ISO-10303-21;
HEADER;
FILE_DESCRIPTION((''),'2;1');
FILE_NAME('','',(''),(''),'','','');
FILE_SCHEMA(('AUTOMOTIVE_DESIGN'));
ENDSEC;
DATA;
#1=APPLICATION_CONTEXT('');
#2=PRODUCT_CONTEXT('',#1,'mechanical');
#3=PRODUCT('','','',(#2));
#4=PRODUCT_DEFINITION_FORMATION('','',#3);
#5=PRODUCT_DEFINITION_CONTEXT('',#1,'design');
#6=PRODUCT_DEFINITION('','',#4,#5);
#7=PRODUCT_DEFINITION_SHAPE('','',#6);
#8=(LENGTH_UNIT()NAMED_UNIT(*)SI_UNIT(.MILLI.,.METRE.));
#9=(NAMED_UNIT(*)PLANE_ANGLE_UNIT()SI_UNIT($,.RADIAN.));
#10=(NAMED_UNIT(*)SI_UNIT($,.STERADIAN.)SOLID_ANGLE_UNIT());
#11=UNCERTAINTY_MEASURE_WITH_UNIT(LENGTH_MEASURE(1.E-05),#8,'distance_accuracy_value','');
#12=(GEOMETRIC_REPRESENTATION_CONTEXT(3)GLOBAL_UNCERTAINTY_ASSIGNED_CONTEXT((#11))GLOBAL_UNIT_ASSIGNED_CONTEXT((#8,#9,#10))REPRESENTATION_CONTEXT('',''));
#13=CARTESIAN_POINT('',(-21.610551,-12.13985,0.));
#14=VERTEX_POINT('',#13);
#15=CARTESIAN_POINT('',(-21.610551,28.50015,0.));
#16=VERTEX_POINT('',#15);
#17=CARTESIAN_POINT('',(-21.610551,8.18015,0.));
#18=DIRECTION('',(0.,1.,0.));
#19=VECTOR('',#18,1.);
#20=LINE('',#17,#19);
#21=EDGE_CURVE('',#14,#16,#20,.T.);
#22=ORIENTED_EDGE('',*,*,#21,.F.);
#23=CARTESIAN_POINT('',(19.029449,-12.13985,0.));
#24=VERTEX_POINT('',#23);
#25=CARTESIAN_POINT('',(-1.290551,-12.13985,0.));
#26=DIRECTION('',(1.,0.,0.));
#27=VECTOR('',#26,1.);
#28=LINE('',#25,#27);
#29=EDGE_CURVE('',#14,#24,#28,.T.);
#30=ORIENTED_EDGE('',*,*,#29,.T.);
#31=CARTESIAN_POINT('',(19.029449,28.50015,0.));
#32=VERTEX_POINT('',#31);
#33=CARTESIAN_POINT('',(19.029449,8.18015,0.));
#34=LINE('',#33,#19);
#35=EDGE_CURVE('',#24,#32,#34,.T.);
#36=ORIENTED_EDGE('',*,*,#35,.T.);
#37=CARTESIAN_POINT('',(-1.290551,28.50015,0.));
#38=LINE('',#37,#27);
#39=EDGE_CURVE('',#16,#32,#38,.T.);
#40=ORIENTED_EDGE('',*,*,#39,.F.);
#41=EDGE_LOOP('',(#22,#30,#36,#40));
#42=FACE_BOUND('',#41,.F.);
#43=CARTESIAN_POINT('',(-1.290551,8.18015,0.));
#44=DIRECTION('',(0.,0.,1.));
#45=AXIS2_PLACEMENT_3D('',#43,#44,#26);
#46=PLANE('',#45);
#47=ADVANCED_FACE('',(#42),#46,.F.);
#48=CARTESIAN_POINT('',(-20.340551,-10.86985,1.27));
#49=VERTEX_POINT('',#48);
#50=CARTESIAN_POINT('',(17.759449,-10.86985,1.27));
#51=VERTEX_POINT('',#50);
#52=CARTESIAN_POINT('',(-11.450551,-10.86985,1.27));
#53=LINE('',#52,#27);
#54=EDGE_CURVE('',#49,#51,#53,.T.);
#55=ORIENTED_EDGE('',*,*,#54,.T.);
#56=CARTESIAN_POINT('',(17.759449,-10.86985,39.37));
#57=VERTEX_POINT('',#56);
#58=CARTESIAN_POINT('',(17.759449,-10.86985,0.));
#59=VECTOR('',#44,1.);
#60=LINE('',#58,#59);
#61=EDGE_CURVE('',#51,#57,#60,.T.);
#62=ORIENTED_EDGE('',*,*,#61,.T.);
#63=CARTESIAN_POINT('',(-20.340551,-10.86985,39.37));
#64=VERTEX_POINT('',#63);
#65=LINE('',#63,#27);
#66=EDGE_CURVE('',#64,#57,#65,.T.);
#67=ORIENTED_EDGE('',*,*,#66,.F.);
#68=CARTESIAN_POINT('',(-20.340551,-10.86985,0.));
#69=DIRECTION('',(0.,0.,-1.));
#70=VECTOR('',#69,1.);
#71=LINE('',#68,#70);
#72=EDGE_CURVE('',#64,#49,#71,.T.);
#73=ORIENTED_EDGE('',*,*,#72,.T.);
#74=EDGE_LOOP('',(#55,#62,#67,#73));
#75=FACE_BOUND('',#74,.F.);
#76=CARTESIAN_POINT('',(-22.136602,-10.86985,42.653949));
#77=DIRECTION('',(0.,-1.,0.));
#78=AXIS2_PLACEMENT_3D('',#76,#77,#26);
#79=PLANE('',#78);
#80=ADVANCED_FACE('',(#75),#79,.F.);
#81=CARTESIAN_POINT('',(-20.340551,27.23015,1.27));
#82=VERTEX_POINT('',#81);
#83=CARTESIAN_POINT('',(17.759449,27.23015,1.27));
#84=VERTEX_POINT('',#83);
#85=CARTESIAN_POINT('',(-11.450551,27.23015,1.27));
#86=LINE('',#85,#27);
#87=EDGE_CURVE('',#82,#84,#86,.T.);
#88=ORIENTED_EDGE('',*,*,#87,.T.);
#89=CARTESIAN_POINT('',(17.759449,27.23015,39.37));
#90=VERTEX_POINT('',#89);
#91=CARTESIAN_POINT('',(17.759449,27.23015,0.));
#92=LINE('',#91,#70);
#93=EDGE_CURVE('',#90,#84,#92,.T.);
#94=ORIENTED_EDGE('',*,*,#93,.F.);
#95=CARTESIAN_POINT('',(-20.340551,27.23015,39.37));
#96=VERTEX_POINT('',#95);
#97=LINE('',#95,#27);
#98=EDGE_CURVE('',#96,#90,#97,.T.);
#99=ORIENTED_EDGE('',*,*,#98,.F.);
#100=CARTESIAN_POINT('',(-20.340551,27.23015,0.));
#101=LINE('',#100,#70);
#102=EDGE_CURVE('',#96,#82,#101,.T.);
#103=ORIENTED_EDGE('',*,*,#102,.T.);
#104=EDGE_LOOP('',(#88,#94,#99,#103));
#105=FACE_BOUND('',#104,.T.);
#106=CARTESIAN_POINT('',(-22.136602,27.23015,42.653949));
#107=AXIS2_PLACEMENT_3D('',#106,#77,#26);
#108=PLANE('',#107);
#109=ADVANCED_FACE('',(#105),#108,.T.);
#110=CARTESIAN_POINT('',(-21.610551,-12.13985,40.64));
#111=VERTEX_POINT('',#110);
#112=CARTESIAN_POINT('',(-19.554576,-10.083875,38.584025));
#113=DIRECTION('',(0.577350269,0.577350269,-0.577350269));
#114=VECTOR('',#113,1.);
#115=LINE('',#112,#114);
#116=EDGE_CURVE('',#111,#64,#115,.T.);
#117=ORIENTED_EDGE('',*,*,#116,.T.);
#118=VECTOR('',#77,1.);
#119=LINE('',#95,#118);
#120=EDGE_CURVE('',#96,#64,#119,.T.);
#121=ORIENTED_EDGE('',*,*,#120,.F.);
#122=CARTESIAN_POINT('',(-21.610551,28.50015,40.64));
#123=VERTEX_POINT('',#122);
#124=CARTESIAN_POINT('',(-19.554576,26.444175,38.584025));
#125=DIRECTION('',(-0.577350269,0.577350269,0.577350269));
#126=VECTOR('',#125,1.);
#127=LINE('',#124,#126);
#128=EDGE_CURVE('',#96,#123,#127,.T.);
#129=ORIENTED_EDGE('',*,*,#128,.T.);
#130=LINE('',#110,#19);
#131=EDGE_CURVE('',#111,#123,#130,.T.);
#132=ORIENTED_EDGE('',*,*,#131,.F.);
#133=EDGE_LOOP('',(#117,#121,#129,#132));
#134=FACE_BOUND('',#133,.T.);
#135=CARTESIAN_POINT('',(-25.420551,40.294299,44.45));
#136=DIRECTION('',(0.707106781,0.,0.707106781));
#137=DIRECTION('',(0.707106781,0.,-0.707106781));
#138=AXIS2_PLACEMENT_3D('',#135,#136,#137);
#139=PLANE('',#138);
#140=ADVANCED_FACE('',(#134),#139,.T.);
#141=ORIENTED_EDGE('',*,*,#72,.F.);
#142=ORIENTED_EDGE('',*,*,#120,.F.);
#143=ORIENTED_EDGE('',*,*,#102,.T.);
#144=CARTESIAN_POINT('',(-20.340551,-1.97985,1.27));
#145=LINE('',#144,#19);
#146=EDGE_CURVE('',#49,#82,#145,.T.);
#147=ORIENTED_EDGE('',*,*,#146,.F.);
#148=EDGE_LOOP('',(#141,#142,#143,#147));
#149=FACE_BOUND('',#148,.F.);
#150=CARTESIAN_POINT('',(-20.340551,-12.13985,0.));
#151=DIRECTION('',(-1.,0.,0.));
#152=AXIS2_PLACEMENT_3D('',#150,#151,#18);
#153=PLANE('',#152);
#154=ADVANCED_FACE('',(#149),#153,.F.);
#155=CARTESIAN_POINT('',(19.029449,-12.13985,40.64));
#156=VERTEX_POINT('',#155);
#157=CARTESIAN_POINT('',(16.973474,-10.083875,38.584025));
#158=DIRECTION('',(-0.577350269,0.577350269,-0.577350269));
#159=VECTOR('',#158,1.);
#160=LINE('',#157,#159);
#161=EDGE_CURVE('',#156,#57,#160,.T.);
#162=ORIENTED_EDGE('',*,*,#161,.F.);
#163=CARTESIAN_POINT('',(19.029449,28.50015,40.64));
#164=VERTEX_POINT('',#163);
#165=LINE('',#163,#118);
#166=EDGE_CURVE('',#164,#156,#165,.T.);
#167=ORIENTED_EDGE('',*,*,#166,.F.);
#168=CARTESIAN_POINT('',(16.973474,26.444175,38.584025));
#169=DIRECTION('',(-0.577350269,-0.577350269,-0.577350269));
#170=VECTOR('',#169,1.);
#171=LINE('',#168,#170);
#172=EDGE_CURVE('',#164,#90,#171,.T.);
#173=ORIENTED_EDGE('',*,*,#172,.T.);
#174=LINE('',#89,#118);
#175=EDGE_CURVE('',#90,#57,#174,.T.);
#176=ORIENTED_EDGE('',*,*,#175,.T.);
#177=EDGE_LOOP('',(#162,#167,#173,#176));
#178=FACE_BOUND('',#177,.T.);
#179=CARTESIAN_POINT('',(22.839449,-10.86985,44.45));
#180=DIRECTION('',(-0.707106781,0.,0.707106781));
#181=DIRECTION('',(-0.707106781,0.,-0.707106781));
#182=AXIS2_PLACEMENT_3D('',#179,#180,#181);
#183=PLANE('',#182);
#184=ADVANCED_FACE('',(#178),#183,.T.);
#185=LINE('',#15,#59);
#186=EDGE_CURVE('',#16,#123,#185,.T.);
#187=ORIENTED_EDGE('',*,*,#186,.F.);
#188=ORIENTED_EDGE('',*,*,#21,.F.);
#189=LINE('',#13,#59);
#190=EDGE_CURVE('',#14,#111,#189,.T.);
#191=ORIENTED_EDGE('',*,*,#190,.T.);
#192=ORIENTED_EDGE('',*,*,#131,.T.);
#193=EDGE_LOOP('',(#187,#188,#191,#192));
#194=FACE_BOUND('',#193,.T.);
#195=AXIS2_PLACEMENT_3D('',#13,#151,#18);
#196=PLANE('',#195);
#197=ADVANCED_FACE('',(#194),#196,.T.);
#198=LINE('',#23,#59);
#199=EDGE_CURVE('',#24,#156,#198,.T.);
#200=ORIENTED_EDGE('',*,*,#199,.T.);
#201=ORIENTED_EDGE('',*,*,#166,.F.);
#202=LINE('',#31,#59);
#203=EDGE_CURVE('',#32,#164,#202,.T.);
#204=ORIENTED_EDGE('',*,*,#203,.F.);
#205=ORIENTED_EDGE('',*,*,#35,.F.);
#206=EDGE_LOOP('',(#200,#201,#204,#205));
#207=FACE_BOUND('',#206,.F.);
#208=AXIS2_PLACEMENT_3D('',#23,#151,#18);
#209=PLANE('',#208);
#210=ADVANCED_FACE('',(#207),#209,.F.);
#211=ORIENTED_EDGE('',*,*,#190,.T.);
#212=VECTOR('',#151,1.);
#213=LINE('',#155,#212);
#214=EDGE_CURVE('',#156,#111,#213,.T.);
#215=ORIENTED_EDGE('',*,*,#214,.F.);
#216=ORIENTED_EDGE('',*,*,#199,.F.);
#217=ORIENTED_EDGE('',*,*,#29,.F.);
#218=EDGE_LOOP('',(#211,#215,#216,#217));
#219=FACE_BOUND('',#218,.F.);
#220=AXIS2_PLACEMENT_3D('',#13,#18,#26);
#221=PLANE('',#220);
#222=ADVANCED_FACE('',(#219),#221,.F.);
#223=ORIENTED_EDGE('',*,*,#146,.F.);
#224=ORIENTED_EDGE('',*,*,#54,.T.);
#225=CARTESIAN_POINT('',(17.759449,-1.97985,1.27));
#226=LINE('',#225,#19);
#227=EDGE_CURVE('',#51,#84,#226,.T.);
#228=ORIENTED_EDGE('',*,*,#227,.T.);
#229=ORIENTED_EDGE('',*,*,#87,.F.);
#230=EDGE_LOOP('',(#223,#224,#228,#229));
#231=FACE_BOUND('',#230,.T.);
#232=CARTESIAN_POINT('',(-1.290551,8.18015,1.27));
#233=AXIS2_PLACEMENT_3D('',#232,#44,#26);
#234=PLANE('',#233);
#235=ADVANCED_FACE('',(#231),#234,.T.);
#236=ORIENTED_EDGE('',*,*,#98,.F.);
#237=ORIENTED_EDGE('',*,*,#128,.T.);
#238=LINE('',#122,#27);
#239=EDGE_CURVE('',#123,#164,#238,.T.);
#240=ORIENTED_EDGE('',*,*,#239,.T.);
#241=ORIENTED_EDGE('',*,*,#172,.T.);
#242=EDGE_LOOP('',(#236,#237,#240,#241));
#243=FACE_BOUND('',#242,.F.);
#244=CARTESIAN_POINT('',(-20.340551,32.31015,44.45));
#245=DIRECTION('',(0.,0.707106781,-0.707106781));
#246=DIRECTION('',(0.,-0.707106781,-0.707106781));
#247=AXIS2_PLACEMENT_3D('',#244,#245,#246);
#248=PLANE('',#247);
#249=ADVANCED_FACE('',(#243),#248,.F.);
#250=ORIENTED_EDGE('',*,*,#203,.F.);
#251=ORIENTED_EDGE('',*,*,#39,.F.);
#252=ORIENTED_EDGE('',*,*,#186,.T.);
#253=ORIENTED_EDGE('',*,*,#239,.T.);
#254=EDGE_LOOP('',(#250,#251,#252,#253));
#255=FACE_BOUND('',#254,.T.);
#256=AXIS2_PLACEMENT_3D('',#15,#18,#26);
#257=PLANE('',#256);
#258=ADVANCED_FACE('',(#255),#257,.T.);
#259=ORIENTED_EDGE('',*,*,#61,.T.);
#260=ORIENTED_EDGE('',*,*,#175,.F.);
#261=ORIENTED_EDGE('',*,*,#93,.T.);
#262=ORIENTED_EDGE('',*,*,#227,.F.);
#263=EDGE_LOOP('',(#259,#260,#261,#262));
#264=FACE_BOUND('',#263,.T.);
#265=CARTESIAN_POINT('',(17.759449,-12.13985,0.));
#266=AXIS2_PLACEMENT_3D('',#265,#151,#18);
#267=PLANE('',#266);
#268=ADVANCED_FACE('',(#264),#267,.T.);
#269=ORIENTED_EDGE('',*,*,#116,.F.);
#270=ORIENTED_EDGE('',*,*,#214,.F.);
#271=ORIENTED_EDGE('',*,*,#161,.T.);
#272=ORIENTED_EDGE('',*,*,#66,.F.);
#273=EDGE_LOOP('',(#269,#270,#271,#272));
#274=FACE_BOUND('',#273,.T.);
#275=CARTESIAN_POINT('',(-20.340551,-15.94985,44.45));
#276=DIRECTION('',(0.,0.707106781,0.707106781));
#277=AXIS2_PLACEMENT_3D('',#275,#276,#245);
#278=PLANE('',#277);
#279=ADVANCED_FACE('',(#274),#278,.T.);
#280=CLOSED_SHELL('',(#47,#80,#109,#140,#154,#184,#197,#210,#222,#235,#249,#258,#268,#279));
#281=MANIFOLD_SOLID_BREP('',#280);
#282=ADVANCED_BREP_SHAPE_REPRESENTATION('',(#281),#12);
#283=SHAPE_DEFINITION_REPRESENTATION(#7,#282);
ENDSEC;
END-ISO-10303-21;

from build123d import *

# Parameters (mm, degrees)
F0_W         = 40.64
F0_H         = 40.64
F1_DEPTH     = 44.45
F2_T         = -1.27
F3_T1_DEPTH  = 38.1
F3_T3_DEPTH  = 38.1
F3_T9_DEPTH  = 51.1641495789
F3_T15_DEPTH = 51.1641495789
F3_T24_DEPTH = 51.1641495789
F3_T30_DEPTH = 51.1641495789
F3_T39_DEPTH = 51.1641495789
F3_T45_DEPTH = 51.1641495789
F3_T54_DEPTH = 51.1641495789
F3_T60_DEPTH = 51.1641495789


# Not quite as in the source:
# - a fillet or chamfer that OpenCascade refuses, or shapes differently, is made with other operations: its cross-section is extruded or revolved along the edge and cut away or added


with BuildPart() as f1:
    # F0 (on Top) → F1 (new body)
    with BuildSketch(Plane.XY):
        with Locations((-1.2905509211, 8.1801498235)):
            Rectangle(F0_W, F0_H)
    extrude(amount=F1_DEPTH)

    # F2
    f2_openings = [f1.faces().sort_by_distance(p)[0] for p in [
        (-1.290551, 8.18015, 44.45),
    ]]
    offset(amount=F2_T, openings=f2_openings)

    # F3: chamfer of 5.08 on 4 edges, made by hand

    # F3_s2 → F3_t1 (cut)
    with BuildSketch(Plane.XZ.offset(-27.2301498235)):
        Polygon((-25.4205509211, 44.45), (-20.3405509211, 39.37), (-20.3405509211, 44.45), align=None)
        Polygon((22.8394490789, 44.45), (17.7594490789, 39.37), (17.7594490789, 44.45), align=None)
    extrude(amount=F3_T1_DEPTH, mode=Mode.SUBTRACT)

    # F3_s4 → F3_t3 (cut)
    with BuildSketch(Plane.YZ.offset(-20.3405509211)):
        Polygon((32.3101498235, 44.45), (27.2301498235, 39.37), (27.2301498235, 44.45), align=None)
        Polygon((-15.9498501765, 44.45), (-10.8698501765, 39.37), (-10.8698501765, 44.45), align=None)
    extrude(amount=F3_T3_DEPTH, mode=Mode.SUBTRACT)


with BuildPart() as f3_tool7:
    # F3_s8 → F3_t9 (new body)
    with BuildSketch(Plane.YZ.offset(17.7594490789)):
        Polygon((32.3101498235, 44.45), (27.2301498235, 39.37), (27.2301498235, 44.45), align=None)
    extrude(amount=-F3_T9_DEPTH)

    split(bisect_by=Plane.XZ.offset(-28.5001498235), keep=Keep.TOP)

    split(bisect_by=Plane.YZ.offset(-21.6105509211), keep=Keep.TOP)

    split(bisect_by=Plane.YZ.offset(-20.3405509211), keep=Keep.BOTTOM)


with BuildPart() as f3_tool13:
    # F3_s14 → F3_t15 (new body)
    with BuildSketch(Plane.XZ.offset(-40.2942994024)):
        Polygon((-25.4205509211, 44.45), (-20.3405509211, 39.37), (-20.3405509211, 44.45), align=None)
    extrude(amount=F3_T15_DEPTH)

    split(bisect_by=Plane.XZ.offset(-28.5001498235), keep=Keep.TOP)

    split(bisect_by=Plane.YZ.offset(-21.6105509211), keep=Keep.TOP)

    split(bisect_by=Plane.XZ.offset(-27.2301498235), keep=Keep.BOTTOM)


with BuildPart() as f3_tool7_1:
    add(f3_tool7.part)

    # F3_t19: intersect F3_tool13
    add(f3_tool13.part, mode=Mode.INTERSECT)


with BuildPart() as f1_1:
    add(f1.part)

    # F3_t5: cut F3_tool7
    add(f3_tool7_1.part, mode=Mode.SUBTRACT)


with BuildPart() as f3_tool22:
    # F3_s23 → F3_t24 (new body)
    with BuildSketch(Plane.YZ.offset(-33.4047005)):
        Polygon((-15.9498501765, 44.45), (-10.8698501765, 39.37), (-10.8698501765, 44.45), align=None)
    extrude(amount=F3_T24_DEPTH)

    split(bisect_by=Plane.YZ.offset(-21.6105509211), keep=Keep.TOP)

    split(bisect_by=Plane.XZ.offset(12.1398501765), keep=Keep.BOTTOM)

    split(bisect_by=Plane.YZ.offset(-20.3405509211), keep=Keep.BOTTOM)


with BuildPart() as f3_tool28:
    # F3_s29 → F3_t30 (new body)
    with BuildSketch(Plane.XZ.offset(-27.2301498235)):
        Polygon((-25.4205509211, 44.45), (-20.3405509211, 39.37), (-20.3405509211, 44.45), align=None)
    extrude(amount=F3_T30_DEPTH)

    split(bisect_by=Plane.YZ.offset(-21.6105509211), keep=Keep.TOP)

    split(bisect_by=Plane.XZ.offset(12.1398501765), keep=Keep.BOTTOM)

    split(bisect_by=Plane.XZ.offset(10.8698501765), keep=Keep.TOP)


with BuildPart() as f3_tool22_1:
    add(f3_tool22.part)

    # F3_t34: intersect F3_tool28
    add(f3_tool28.part, mode=Mode.INTERSECT)


with BuildPart() as f1_2:
    add(f1_1.part)

    # F3_t20: cut F3_tool22
    add(f3_tool22_1.part, mode=Mode.SUBTRACT)


with BuildPart() as f3_tool37:
    # F3_s38 → F3_t39 (new body)
    with BuildSketch(Plane.YZ.offset(30.8235986578)):
        Polygon((32.3101498235, 44.45), (27.2301498235, 39.37), (27.2301498235, 44.45), align=None)
    extrude(amount=-F3_T39_DEPTH)

    split(bisect_by=Plane.XZ.offset(-28.5001498235), keep=Keep.TOP)

    split(bisect_by=Plane.YZ.offset(19.0294490789), keep=Keep.BOTTOM)

    split(bisect_by=Plane.YZ.offset(17.7594490789), keep=Keep.TOP)


with BuildPart() as f3_tool43:
    # F3_s44 → F3_t45 (new body)
    with BuildSketch(Plane.XZ.offset(10.8698501765)):
        Polygon((22.8394490789, 44.45), (17.7594490789, 39.37), (17.7594490789, 44.45), align=None)
    extrude(amount=-F3_T45_DEPTH)

    split(bisect_by=Plane.XZ.offset(-28.5001498235), keep=Keep.TOP)

    split(bisect_by=Plane.YZ.offset(19.0294490789), keep=Keep.BOTTOM)

    split(bisect_by=Plane.XZ.offset(-27.2301498235), keep=Keep.BOTTOM)


with BuildPart() as f3_tool37_1:
    add(f3_tool37.part)

    # F3_t49: intersect F3_tool43
    add(f3_tool43.part, mode=Mode.INTERSECT)


with BuildPart() as f1_3:
    add(f1_2.part)

    # F3_t35: cut F3_tool37
    add(f3_tool37_1.part, mode=Mode.SUBTRACT)


with BuildPart() as f3_tool52:
    # F3_s53 → F3_t54 (new body)
    with BuildSketch(Plane.XZ.offset(23.9339997554)):
        Polygon((22.8394490789, 44.45), (17.7594490789, 39.37), (17.7594490789, 44.45), align=None)
    extrude(amount=-F3_T54_DEPTH)

    split(bisect_by=Plane.XZ.offset(12.1398501765), keep=Keep.BOTTOM)

    split(bisect_by=Plane.YZ.offset(19.0294490789), keep=Keep.BOTTOM)

    split(bisect_by=Plane.XZ.offset(10.8698501765), keep=Keep.TOP)


with BuildPart() as f3_tool58:
    # F3_s59 → F3_t60 (new body)
    with BuildSketch(Plane.YZ.offset(-20.3405509211)):
        Polygon((-15.9498501765, 44.45), (-10.8698501765, 39.37), (-10.8698501765, 44.45), align=None)
    extrude(amount=F3_T60_DEPTH)

    split(bisect_by=Plane.XZ.offset(12.1398501765), keep=Keep.BOTTOM)

    split(bisect_by=Plane.YZ.offset(19.0294490789), keep=Keep.BOTTOM)

    split(bisect_by=Plane.YZ.offset(17.7594490789), keep=Keep.TOP)


with BuildPart() as f3_tool52_1:
    add(f3_tool52.part)

    # F3_t64: intersect F3_tool58
    add(f3_tool58.part, mode=Mode.INTERSECT)


with BuildPart() as f1_4:
    add(f1_3.part)

    # F3_t50: cut F3_tool52
    add(f3_tool52_1.part, mode=Mode.SUBTRACT)


solid = f1_4.part
